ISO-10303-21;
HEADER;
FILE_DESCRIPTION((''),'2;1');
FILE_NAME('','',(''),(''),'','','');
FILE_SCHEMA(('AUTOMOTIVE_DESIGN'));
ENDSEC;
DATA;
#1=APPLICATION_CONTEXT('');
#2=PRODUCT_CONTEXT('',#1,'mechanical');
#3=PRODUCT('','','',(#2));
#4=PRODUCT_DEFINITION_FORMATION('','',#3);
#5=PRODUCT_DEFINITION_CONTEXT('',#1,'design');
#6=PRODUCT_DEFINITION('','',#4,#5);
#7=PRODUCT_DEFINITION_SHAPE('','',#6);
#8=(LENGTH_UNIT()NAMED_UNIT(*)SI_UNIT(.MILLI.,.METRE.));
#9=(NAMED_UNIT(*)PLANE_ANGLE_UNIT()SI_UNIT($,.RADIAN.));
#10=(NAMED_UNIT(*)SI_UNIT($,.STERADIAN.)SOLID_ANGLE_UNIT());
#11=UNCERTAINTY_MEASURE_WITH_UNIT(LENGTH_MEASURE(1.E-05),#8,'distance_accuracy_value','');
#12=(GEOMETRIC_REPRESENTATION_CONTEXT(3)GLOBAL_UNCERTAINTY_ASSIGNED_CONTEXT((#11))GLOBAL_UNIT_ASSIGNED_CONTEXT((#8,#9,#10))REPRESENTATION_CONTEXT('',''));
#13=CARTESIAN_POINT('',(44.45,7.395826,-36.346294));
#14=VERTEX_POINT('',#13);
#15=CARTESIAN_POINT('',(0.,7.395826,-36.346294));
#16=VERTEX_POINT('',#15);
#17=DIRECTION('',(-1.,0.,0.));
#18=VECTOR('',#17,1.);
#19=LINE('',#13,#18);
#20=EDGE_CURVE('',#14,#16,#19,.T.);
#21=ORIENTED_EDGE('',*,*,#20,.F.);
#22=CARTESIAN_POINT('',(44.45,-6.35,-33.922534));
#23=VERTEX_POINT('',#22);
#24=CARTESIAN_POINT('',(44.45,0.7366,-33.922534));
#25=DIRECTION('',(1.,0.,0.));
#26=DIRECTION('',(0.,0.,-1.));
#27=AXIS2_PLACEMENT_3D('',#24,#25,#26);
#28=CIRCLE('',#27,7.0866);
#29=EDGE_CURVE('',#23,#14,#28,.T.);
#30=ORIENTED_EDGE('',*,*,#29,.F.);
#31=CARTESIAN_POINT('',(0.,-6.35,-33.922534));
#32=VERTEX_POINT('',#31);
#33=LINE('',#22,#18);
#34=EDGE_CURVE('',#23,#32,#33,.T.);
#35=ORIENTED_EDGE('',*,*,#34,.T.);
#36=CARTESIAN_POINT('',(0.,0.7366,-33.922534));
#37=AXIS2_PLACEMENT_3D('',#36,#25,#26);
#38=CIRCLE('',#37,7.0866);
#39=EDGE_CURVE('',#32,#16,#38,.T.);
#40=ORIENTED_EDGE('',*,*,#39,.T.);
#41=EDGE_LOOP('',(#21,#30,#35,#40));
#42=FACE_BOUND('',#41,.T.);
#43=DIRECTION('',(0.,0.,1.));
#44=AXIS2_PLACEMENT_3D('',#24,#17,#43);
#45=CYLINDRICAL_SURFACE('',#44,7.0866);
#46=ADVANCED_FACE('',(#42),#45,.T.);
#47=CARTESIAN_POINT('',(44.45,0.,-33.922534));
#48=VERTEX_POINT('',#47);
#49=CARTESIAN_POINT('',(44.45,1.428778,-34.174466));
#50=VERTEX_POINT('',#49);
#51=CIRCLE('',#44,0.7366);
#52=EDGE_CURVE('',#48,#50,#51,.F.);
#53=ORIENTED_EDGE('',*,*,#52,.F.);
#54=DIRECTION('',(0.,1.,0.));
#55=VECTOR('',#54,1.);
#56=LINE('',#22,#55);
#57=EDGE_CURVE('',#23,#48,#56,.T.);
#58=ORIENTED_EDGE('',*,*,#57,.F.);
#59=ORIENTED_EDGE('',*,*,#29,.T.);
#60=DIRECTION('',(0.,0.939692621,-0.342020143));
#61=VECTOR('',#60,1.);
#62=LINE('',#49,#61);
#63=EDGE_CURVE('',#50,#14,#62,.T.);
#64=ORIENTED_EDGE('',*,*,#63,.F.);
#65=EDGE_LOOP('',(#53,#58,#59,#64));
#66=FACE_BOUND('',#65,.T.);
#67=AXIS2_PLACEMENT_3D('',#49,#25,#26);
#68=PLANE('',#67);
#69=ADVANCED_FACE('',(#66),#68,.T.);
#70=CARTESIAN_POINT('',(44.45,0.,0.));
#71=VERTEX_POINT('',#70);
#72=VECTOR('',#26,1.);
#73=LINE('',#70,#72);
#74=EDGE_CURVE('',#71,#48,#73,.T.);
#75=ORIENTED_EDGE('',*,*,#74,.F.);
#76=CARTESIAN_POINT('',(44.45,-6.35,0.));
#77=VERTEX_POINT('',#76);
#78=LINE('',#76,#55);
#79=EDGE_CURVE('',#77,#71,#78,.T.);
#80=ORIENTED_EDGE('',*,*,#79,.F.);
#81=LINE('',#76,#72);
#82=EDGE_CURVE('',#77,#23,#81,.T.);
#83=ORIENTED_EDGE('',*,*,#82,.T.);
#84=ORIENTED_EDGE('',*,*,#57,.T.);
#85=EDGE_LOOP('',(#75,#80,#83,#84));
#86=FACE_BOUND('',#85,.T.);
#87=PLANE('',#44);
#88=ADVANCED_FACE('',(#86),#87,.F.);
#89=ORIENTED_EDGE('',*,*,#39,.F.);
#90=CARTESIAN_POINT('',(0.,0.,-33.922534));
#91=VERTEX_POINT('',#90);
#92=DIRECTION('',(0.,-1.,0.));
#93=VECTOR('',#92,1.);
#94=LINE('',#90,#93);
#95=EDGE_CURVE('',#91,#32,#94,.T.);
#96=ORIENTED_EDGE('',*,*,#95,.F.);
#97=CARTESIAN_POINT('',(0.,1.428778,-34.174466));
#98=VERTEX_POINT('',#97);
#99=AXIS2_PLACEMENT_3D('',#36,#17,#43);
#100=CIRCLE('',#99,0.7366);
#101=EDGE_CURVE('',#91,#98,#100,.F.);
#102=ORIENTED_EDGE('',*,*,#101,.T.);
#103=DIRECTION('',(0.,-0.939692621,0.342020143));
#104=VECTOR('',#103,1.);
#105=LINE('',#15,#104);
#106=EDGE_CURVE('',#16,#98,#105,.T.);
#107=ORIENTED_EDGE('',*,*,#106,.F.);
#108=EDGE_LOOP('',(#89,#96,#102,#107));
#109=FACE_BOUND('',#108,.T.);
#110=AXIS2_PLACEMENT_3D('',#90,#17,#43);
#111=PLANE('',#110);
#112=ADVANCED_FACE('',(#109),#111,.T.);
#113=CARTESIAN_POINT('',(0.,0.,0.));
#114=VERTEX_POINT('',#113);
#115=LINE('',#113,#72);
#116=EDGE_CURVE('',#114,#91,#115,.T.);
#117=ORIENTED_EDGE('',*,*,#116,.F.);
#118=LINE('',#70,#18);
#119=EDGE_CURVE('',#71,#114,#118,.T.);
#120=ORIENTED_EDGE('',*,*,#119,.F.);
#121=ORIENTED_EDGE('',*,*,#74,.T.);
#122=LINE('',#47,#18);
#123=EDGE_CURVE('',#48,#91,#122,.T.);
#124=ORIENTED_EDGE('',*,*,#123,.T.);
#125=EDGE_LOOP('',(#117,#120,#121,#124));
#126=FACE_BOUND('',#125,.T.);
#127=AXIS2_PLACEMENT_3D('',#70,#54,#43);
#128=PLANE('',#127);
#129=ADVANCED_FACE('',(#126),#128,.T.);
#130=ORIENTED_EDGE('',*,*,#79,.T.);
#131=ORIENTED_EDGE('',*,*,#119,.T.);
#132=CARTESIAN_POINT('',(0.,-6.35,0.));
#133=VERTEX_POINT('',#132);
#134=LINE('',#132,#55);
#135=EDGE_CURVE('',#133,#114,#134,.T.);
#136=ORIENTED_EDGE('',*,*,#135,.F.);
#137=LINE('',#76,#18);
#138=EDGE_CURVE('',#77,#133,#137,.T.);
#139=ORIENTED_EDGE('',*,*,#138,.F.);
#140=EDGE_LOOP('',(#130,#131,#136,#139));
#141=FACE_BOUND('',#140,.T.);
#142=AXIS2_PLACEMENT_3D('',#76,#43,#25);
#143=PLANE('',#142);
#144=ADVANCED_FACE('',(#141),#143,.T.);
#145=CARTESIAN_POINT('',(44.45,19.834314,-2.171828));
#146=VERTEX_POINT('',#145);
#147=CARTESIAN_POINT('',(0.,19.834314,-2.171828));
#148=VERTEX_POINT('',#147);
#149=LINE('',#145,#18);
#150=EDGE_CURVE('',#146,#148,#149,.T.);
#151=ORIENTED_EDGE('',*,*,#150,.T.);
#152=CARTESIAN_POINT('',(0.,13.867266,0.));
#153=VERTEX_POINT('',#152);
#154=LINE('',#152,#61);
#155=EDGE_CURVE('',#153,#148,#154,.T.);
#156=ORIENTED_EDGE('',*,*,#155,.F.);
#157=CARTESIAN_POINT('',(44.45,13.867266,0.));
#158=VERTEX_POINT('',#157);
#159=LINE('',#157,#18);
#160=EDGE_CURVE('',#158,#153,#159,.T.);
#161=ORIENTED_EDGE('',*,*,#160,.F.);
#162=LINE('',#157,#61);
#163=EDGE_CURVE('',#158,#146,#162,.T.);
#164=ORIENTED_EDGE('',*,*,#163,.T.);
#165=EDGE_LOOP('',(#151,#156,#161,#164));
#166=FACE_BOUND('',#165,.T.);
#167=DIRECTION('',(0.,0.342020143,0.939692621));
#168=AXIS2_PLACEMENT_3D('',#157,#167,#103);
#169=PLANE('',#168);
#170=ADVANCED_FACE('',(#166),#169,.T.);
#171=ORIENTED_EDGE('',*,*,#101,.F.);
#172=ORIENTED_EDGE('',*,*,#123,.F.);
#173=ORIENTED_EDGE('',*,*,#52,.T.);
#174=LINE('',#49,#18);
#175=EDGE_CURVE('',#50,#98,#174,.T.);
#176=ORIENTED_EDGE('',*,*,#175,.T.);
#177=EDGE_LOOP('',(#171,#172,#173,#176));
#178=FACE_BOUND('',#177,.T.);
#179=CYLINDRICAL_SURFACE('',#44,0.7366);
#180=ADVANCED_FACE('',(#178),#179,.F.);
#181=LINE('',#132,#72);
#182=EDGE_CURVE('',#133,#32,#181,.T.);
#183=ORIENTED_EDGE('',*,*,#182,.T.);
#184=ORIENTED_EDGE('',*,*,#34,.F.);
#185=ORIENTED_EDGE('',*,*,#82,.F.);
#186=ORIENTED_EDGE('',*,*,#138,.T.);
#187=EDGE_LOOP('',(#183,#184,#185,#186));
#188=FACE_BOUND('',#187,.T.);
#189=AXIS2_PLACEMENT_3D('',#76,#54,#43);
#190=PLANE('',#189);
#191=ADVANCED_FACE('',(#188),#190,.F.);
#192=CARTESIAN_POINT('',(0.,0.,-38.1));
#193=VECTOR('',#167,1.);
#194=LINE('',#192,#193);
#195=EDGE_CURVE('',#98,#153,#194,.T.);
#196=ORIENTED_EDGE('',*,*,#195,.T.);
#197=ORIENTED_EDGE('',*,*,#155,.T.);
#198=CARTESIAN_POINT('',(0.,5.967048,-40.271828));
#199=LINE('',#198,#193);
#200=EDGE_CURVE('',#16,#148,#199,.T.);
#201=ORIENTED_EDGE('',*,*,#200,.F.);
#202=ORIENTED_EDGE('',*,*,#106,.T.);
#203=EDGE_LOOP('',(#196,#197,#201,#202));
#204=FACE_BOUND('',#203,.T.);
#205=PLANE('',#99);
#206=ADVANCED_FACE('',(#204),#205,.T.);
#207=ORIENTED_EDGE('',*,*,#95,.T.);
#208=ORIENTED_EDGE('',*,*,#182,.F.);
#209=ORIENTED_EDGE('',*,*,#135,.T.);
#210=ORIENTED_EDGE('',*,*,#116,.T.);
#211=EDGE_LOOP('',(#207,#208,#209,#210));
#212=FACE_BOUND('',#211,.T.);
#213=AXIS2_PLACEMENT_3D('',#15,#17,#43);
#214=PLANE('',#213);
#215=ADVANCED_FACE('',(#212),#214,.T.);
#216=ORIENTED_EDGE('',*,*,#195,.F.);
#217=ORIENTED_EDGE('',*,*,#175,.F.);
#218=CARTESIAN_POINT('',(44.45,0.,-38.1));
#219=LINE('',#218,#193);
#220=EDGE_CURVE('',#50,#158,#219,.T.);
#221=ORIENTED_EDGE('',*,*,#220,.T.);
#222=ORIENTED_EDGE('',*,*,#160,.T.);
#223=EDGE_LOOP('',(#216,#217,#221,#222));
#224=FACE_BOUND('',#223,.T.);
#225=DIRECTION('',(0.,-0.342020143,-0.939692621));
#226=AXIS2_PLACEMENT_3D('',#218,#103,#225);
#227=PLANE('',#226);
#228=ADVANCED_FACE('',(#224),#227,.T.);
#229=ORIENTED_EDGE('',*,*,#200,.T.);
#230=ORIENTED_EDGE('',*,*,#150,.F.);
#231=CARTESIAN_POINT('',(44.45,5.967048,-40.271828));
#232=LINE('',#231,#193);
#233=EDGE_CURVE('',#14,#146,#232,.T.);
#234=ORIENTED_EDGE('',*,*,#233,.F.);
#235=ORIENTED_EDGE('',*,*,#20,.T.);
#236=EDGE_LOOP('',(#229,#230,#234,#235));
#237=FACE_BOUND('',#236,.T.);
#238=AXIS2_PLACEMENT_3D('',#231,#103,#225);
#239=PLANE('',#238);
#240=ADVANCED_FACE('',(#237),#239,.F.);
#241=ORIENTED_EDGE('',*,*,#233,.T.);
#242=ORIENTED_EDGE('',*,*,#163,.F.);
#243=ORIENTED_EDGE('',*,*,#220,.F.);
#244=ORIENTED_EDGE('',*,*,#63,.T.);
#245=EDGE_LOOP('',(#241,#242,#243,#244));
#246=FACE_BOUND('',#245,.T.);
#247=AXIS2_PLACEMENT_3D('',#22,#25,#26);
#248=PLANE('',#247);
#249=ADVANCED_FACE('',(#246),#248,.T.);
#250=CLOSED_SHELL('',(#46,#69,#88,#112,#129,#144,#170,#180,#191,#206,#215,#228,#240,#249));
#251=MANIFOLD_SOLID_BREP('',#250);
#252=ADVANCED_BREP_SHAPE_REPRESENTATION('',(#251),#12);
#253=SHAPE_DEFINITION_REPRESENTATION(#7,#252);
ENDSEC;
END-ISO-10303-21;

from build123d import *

# Parameters (mm, degrees)
BASE_FLANGE1_DEPTH = 44.45


# Sheet-metal steps are written as plain solids
with BuildPart() as part:
    # Sketch1 → Base-Flange1 (new body)
    with BuildSketch(Plane(origin=(0, 0, 0), x_dir=(0, 0, -1), z_dir=(1, 0, 0))):
        with BuildLine():
            Line((0, 0), (33.922533812, 0))
            ThreePointArc((33.922533812, 0), (34.647943203, 0.608690752), (34.174465849, 1.428777584))
            Line((34.174465849, 1.428777584), (0, 13.867265926))
            Line((0, 13.867265926), (2.17182791, 19.834314068))
            Line((2.17182791, 19.834314068), (36.346293759, 7.395825726))
            ThreePointArc((36.346293759, 7.395825726), (40.901472434, -0.493975176), (33.922533812, -6.35))
            Line((33.922533812, -6.35), (0, -6.35))
            Line((0, -6.35), (0, 0))
        make_face()
    extrude(amount=BASE_FLANGE1_DEPTH)


solid = part.part
